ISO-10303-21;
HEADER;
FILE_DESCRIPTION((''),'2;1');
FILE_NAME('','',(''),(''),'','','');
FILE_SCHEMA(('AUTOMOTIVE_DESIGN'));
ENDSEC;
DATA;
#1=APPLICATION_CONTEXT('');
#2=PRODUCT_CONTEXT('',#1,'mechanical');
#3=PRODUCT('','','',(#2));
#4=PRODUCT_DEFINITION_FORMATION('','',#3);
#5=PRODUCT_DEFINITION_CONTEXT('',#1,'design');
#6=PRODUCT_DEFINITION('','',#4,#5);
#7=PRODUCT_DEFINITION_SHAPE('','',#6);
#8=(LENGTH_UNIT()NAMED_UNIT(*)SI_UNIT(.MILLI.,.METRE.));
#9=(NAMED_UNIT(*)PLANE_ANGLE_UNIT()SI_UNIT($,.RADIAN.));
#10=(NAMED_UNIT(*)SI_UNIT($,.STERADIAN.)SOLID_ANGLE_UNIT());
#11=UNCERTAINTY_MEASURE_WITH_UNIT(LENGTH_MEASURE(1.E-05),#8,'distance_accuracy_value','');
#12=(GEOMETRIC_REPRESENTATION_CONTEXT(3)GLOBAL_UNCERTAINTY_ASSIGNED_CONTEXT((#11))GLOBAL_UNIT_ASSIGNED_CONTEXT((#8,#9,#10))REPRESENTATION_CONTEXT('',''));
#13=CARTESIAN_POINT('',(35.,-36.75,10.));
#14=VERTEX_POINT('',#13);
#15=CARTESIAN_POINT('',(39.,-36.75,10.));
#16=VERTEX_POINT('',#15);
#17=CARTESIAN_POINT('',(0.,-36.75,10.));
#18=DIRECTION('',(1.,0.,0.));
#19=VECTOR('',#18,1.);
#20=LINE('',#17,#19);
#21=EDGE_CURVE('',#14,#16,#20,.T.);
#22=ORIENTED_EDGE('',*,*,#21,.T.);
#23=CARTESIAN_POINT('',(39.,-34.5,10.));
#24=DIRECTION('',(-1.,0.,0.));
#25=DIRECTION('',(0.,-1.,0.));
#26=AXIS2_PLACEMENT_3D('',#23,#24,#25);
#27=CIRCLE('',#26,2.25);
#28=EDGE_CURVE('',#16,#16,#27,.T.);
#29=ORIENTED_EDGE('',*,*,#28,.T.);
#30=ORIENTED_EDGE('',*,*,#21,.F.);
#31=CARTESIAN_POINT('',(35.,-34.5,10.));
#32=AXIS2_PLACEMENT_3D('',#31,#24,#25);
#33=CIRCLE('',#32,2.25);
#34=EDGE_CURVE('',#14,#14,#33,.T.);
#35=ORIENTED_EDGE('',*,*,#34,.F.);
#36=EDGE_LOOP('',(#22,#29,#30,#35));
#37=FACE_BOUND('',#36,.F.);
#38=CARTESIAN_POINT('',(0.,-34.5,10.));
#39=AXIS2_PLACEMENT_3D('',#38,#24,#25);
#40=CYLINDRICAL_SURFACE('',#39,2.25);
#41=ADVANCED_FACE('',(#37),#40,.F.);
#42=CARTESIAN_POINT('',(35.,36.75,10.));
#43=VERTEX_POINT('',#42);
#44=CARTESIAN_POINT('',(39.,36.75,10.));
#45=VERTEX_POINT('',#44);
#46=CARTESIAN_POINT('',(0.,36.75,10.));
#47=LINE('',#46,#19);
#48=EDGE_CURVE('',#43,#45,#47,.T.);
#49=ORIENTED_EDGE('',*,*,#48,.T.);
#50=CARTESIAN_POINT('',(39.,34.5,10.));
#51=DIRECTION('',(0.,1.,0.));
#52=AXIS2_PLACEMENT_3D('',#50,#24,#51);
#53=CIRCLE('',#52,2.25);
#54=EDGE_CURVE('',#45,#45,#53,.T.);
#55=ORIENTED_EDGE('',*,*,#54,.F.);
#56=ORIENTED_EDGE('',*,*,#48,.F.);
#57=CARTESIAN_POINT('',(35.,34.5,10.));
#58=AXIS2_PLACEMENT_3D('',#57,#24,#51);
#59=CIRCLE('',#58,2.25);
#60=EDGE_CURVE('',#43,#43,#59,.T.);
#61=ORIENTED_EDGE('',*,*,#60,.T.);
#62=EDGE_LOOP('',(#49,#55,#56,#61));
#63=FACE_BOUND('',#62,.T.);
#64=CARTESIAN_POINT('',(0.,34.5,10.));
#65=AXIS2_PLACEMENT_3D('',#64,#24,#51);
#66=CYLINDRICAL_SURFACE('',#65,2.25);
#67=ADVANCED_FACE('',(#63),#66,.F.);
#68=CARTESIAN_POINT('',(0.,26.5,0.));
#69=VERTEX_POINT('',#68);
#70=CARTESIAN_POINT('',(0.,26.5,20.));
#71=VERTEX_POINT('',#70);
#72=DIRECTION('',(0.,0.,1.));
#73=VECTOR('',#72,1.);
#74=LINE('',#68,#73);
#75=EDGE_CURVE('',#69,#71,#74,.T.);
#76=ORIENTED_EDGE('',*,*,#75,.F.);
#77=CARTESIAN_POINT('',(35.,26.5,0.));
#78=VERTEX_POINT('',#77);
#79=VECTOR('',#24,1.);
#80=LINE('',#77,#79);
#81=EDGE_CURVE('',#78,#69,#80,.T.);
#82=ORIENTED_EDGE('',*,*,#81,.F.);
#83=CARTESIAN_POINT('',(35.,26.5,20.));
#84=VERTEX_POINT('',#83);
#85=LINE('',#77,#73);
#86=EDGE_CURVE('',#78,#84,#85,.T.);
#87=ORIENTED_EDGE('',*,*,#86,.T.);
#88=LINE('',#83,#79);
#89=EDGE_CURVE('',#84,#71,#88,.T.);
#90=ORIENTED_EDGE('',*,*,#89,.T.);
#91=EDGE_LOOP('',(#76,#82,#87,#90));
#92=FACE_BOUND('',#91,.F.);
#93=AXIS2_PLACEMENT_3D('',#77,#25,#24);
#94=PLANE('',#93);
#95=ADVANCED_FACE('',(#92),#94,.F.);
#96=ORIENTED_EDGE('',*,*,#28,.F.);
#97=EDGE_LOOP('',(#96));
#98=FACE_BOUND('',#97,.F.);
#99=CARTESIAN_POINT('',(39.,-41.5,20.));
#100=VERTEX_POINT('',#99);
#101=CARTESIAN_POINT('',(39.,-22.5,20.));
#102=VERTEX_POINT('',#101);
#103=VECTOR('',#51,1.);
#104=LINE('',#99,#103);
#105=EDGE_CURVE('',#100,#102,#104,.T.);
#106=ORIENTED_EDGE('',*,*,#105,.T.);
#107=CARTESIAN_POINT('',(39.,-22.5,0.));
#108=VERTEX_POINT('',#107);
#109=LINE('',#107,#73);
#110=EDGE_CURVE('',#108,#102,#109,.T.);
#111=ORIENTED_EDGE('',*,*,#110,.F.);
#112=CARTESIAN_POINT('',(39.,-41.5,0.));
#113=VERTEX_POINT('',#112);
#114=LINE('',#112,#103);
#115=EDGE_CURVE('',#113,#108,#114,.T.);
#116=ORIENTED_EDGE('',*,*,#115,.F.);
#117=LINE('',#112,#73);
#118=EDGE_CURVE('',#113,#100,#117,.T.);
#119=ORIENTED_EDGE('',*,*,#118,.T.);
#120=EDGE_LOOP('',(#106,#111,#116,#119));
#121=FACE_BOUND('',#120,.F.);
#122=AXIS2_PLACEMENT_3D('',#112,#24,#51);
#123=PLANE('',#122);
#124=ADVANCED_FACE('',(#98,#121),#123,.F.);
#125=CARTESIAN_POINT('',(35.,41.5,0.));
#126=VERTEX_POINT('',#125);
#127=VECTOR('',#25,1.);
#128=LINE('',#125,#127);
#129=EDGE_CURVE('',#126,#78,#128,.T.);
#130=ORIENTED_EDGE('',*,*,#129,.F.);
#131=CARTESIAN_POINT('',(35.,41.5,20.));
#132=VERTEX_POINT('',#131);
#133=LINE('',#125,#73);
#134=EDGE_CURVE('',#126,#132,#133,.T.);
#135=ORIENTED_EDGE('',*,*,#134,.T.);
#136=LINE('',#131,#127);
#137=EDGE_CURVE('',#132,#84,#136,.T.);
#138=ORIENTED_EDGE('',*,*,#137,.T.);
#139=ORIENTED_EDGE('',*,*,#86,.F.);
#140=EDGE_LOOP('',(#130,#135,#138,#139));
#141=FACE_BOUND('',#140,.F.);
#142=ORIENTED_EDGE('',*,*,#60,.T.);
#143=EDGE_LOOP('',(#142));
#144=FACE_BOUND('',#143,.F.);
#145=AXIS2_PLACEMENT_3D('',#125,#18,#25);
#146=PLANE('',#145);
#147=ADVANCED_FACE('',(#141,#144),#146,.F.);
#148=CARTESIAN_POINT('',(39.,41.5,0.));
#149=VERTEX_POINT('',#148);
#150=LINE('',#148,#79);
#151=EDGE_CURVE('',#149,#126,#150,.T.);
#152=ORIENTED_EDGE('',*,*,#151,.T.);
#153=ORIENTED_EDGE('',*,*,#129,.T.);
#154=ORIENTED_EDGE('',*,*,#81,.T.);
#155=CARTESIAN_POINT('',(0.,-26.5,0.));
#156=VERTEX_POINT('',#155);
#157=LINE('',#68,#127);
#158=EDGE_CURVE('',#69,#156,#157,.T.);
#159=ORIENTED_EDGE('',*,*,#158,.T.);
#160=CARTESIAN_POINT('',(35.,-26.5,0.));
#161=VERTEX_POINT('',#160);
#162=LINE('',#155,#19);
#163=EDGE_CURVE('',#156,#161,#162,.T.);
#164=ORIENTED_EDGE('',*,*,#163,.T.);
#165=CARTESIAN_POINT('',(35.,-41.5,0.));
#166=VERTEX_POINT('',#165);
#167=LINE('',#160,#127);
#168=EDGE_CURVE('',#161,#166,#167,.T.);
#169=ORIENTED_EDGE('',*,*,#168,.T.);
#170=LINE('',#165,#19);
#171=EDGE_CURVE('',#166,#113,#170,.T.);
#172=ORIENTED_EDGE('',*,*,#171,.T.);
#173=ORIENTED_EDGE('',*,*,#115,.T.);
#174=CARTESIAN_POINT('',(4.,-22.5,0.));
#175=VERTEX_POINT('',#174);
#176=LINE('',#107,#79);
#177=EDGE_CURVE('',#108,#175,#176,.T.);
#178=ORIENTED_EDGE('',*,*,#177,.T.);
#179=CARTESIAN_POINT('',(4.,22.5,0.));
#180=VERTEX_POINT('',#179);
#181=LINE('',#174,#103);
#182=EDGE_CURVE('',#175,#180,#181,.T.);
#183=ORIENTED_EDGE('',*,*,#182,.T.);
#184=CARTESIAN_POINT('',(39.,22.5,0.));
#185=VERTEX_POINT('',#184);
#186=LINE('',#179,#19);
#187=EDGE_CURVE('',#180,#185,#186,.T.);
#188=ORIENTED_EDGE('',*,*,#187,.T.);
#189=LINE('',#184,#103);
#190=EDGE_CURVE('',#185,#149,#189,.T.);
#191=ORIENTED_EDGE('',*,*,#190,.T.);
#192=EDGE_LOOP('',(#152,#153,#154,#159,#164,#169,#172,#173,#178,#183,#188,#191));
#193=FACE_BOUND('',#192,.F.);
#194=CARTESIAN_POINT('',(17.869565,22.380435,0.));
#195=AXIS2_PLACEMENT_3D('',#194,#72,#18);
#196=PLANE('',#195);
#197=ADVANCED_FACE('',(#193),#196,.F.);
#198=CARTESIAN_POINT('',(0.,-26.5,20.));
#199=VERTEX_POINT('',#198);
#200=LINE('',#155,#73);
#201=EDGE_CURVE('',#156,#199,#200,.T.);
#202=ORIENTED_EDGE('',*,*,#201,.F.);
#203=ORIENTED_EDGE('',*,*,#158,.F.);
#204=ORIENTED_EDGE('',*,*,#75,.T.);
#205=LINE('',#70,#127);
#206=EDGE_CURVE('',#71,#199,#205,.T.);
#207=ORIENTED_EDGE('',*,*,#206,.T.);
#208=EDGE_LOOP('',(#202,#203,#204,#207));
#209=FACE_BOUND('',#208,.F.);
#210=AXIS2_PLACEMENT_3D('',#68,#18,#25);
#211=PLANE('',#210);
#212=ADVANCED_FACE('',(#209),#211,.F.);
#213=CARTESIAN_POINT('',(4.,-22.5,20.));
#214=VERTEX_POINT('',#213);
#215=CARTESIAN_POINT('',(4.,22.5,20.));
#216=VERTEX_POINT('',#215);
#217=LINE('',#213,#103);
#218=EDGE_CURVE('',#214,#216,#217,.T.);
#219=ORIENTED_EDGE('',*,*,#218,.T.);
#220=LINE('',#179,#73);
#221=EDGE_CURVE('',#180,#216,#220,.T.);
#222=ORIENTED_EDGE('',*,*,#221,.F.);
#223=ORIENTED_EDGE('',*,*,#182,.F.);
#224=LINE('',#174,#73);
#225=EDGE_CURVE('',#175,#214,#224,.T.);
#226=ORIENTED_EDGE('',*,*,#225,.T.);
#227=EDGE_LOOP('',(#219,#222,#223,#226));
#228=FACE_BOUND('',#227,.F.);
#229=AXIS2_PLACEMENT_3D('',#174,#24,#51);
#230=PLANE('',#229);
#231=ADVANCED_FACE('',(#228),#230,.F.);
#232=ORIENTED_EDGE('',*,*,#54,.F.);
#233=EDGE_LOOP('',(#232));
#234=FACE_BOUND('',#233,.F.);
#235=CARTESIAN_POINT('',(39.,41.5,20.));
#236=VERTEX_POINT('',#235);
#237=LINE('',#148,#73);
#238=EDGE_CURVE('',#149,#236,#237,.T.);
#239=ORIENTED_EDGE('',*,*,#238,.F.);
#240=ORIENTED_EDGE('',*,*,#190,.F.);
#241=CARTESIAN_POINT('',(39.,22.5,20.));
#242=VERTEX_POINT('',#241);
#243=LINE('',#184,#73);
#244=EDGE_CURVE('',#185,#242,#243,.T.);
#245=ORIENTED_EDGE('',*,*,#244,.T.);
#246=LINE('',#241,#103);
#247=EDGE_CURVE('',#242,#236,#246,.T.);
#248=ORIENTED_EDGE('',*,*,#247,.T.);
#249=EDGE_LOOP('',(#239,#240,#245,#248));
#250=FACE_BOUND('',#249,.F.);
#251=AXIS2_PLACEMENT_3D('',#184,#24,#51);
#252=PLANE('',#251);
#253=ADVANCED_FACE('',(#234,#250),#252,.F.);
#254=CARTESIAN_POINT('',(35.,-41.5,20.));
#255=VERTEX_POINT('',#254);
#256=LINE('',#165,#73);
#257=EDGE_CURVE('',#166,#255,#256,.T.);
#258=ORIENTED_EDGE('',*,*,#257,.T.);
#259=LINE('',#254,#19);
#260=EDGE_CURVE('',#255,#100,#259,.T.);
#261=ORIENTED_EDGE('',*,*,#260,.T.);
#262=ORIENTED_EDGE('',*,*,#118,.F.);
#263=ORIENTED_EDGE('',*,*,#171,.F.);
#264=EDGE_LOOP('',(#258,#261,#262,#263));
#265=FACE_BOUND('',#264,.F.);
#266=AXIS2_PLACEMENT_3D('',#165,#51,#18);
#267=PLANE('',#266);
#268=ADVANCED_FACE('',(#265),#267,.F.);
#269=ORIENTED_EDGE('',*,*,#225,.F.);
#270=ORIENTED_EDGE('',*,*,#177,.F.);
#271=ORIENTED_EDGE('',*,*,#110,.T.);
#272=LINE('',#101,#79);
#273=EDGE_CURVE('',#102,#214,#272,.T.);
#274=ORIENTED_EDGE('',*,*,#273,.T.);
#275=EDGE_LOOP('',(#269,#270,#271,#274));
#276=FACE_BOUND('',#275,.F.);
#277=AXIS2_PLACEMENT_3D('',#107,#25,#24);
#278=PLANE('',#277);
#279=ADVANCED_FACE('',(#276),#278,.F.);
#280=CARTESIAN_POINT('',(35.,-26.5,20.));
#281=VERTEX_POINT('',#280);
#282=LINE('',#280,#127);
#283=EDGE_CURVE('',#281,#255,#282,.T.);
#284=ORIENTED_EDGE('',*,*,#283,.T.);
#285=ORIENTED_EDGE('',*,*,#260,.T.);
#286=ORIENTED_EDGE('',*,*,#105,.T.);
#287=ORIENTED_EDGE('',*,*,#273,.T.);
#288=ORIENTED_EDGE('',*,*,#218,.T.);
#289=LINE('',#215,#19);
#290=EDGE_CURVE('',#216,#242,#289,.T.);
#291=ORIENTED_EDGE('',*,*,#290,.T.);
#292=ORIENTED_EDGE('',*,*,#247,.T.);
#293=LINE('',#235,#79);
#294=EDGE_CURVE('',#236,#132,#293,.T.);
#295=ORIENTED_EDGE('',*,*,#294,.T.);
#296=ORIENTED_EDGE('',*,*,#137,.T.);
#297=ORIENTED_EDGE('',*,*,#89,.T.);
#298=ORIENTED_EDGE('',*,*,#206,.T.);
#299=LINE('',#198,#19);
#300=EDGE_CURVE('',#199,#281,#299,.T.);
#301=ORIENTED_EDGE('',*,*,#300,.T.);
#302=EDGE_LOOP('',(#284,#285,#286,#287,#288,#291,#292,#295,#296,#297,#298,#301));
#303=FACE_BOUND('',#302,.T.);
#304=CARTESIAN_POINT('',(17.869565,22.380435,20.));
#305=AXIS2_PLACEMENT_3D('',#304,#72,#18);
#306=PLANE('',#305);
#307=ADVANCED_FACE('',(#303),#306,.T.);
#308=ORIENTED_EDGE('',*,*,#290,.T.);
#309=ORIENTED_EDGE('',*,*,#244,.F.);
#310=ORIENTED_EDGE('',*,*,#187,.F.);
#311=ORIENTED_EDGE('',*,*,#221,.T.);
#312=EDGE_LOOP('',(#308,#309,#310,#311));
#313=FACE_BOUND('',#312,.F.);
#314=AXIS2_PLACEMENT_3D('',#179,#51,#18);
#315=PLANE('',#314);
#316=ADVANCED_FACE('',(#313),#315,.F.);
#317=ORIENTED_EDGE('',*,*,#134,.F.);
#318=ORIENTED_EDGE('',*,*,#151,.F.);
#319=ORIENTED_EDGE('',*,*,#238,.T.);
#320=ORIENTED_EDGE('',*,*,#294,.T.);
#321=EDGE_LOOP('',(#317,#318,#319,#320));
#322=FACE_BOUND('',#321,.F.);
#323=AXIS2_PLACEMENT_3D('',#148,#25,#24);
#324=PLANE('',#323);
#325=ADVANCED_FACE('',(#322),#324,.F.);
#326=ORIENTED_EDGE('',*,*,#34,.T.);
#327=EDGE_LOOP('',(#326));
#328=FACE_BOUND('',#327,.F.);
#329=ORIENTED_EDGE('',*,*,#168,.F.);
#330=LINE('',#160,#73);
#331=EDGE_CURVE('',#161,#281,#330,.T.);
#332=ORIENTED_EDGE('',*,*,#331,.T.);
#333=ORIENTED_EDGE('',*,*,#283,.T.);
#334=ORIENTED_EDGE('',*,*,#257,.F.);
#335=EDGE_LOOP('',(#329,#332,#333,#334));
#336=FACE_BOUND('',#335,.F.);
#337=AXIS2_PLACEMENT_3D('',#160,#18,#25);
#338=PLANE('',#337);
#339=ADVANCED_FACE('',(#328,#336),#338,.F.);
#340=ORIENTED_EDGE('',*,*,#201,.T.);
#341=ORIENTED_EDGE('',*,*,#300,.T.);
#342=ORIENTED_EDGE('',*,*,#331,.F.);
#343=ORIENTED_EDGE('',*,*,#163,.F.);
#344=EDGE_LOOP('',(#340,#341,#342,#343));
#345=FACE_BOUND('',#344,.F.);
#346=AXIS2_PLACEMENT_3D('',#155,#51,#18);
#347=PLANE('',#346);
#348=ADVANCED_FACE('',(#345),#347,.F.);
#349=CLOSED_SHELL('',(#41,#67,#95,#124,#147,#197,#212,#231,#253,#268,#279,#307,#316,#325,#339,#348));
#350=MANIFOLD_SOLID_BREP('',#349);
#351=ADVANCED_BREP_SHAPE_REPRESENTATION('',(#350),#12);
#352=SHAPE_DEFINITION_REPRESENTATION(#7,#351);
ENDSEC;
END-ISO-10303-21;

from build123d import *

# Parameters (mm, degrees)
F1_DEPTH = 20
F2_R     = 2.25
F3_DEPTH = 39.001


# Not quite as in the source:
# - a pattern or mirror of a feature is missing from the dataset's text; its kind, count and spacing are read off the source's solid


with BuildPart() as f1:
    # F0 (on Top) → F1 (new body)
    with BuildSketch(Plane.XY):
        Polygon((0, 26.5), (0, 0), (4, 0), (4, 22.5), (39, 22.5), (39, 41.5), (35, 41.5), (35, 26.5), align=None)
        Polygon((4, 0), (0, 0), (0, -26.5), (35, -26.5), (35, -41.5), (39, -41.5), (39, -22.5), (4, -22.5), align=None)
    extrude(amount=F1_DEPTH)

    # F2 (on Right) → F3 (cut, through all)
    with BuildSketch(Plane.YZ):
        with Locations((34.5, 10)):
            Circle(F2_R)
    f3 = extrude(amount=F3_DEPTH, mode=Mode.SUBTRACT)

    # F3_copies: F3 across plane
    add(f3.mirror(Plane(origin=(0, 0, 0), x_dir=(0, 0, -1), z_dir=(0, -1, 0))), mode=Mode.SUBTRACT)


solid = f1.part
